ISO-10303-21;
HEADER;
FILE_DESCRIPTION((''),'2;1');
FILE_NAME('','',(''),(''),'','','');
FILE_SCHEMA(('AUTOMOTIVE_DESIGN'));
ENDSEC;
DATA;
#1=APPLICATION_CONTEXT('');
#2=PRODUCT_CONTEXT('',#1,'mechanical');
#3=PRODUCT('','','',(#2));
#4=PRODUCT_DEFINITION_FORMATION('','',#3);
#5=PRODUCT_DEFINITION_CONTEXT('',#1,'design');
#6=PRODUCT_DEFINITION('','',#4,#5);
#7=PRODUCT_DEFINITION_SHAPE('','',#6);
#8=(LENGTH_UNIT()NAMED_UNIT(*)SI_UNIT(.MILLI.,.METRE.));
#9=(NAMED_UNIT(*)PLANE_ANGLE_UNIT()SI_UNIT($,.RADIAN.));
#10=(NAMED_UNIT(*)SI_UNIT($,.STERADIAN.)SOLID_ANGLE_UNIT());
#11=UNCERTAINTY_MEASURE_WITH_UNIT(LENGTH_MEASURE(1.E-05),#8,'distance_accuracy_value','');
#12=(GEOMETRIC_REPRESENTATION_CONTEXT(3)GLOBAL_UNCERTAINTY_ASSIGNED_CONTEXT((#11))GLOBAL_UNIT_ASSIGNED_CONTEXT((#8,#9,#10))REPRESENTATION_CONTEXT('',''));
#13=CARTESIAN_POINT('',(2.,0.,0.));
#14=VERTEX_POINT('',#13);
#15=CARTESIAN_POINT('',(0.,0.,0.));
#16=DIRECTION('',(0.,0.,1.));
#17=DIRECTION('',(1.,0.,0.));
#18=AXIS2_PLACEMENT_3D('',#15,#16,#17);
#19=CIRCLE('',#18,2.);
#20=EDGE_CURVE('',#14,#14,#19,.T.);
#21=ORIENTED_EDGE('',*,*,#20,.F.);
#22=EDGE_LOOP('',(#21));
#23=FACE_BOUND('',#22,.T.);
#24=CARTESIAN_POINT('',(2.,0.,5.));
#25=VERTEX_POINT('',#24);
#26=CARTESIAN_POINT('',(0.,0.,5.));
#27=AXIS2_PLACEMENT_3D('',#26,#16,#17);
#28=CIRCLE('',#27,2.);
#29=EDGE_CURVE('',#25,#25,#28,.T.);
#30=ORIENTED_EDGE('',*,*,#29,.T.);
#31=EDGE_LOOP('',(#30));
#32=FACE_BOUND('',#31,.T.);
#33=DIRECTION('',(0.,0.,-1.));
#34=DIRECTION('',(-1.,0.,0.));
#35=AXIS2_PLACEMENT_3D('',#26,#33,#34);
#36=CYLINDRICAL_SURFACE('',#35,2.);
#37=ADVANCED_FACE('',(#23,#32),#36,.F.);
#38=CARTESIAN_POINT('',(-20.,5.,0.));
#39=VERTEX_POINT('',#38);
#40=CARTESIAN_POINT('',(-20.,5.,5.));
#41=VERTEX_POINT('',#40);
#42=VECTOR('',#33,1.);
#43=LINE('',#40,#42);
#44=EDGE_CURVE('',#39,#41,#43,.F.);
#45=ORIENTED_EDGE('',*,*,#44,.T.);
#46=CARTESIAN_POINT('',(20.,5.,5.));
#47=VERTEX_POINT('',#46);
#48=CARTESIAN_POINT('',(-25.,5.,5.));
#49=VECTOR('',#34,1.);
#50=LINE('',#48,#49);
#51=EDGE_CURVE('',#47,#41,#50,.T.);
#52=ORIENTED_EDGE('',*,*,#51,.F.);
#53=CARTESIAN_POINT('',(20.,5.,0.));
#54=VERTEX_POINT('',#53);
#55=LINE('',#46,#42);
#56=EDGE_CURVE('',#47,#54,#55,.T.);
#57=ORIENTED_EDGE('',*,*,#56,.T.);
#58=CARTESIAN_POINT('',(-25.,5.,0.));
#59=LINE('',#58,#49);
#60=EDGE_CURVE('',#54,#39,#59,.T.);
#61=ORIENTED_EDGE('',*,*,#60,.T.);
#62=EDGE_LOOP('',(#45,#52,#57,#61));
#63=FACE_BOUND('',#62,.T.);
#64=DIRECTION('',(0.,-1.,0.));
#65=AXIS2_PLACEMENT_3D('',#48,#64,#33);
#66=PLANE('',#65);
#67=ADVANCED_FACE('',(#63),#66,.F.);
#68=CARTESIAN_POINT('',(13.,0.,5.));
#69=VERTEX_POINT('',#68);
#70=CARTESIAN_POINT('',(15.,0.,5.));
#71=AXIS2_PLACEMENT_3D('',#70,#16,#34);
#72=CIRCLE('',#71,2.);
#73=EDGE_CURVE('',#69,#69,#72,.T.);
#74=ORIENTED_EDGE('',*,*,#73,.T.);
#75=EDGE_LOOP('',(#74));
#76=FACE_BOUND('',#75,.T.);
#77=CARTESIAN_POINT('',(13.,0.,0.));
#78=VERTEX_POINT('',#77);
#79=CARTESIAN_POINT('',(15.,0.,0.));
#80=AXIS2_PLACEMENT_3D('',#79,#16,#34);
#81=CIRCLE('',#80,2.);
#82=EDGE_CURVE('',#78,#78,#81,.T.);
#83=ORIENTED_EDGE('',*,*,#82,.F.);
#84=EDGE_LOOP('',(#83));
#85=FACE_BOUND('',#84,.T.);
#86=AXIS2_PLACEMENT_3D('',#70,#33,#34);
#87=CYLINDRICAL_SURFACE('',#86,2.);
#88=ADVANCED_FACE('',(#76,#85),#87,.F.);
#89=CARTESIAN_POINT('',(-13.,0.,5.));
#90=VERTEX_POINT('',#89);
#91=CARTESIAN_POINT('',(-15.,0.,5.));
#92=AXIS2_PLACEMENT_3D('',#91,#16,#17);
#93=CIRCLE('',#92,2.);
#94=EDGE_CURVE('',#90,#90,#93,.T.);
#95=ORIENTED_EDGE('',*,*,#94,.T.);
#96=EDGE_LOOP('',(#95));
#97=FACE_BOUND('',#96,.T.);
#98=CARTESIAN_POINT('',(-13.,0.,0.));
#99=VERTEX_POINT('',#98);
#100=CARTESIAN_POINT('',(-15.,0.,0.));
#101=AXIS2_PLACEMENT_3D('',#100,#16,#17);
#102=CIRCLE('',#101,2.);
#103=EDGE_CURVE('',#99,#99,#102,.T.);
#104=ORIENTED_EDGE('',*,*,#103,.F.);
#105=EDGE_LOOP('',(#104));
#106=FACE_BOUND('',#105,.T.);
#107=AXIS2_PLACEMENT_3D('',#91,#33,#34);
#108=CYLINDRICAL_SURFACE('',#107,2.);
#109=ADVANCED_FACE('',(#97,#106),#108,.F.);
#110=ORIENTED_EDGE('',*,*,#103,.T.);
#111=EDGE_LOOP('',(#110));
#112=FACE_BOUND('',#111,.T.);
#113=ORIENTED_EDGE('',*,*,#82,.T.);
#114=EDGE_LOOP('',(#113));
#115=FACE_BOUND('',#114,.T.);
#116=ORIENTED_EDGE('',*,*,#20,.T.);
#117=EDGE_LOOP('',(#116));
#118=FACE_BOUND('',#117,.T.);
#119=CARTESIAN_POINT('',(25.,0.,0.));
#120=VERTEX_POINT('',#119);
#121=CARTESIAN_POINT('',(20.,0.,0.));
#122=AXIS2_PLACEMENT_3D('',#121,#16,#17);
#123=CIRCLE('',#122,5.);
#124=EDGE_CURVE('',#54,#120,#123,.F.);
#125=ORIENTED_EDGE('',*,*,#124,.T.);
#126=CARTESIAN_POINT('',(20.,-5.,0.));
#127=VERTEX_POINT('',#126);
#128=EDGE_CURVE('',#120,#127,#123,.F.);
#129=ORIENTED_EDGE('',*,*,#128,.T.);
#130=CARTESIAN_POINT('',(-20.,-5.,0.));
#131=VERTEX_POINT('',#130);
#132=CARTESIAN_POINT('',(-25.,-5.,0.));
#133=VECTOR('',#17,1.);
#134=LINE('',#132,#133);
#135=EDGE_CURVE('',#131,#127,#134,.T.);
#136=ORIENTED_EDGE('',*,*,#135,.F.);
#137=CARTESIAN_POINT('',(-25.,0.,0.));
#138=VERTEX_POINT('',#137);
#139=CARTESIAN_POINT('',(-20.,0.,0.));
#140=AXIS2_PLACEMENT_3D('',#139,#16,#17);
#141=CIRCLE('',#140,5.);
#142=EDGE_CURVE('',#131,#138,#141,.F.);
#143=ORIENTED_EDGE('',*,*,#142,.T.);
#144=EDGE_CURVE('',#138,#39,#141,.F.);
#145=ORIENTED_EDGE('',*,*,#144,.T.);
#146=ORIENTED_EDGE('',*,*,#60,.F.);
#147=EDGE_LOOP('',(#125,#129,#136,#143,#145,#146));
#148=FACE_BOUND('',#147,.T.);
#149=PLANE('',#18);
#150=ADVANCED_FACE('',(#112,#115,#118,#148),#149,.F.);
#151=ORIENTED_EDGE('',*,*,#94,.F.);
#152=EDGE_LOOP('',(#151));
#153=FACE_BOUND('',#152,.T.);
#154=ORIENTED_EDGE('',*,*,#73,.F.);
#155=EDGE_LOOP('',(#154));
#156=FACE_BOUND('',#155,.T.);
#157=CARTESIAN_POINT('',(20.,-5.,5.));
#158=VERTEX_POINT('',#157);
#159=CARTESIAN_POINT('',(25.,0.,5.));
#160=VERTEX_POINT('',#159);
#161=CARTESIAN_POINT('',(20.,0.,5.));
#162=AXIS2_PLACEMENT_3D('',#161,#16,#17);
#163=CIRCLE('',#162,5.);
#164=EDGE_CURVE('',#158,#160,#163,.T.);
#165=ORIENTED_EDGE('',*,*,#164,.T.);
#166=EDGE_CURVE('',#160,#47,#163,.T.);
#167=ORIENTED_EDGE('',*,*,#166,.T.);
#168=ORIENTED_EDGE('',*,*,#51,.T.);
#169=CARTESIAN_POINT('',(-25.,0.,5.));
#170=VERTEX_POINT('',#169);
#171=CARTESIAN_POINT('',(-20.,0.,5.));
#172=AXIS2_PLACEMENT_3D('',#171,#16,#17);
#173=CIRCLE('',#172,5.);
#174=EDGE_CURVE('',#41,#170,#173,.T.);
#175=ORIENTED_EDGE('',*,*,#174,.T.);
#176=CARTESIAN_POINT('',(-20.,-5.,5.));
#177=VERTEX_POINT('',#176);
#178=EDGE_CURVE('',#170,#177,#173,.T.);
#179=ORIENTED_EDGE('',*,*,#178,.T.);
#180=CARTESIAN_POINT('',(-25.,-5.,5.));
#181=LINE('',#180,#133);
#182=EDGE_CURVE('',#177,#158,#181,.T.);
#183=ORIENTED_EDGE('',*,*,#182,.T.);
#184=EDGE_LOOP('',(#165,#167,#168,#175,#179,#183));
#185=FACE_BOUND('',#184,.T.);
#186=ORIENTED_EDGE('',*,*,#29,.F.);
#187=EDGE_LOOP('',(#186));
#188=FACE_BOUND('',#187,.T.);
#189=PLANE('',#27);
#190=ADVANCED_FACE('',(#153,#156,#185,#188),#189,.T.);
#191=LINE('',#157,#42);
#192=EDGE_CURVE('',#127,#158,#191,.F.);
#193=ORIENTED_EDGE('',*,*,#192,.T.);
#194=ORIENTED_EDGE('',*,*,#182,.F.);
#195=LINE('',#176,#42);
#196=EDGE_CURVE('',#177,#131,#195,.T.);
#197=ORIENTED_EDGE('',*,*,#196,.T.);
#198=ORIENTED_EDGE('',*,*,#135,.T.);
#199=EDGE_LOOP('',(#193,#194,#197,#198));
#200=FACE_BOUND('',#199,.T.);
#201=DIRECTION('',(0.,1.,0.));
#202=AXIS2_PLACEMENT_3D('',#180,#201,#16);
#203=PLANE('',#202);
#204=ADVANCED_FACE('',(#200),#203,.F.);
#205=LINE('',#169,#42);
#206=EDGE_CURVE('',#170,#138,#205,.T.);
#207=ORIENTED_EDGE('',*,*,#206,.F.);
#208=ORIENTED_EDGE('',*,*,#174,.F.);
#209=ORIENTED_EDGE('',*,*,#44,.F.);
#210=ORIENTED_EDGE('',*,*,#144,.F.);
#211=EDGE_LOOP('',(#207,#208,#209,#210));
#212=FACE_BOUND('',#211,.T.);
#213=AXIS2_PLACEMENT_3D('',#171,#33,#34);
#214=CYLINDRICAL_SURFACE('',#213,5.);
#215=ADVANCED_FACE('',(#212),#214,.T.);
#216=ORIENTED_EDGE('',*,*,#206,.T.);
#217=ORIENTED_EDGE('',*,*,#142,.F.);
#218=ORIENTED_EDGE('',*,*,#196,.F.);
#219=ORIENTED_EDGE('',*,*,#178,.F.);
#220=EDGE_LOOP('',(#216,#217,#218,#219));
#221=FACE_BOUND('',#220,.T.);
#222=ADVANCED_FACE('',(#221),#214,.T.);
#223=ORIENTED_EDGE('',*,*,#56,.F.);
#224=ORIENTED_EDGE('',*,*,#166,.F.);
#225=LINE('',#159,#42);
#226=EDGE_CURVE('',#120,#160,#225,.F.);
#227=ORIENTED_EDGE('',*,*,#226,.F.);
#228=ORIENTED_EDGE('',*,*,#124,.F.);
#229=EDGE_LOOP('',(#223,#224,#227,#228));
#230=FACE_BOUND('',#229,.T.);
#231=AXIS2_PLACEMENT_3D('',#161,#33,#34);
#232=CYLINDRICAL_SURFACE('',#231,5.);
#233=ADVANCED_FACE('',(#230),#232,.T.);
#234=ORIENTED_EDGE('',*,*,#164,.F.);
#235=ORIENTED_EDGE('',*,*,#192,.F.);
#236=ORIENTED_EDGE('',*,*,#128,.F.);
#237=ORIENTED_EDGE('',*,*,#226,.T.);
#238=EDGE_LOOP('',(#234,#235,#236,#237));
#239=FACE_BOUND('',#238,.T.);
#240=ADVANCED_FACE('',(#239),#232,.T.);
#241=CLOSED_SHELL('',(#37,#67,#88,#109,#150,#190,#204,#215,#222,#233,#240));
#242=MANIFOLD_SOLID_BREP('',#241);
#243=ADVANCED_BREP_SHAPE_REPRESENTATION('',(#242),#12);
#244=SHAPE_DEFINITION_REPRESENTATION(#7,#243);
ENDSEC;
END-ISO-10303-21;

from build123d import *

# Parameters (mm, degrees)
SKETCH_1_W      = 50
SKETCH_1_H      = 10
SKETCH_1_R      = 2
EXTRUDE_1_DEPTH = 5
FILLET_1_R      = 5


with BuildPart() as part:
    # 草图1 → 凸台-拉伸1 (new body)
    with BuildSketch(Plane.XY):
        Rectangle(SKETCH_1_W, SKETCH_1_H)
        with Locations((-15, 0)):
            Circle(SKETCH_1_R, mode=Mode.SUBTRACT)
        with Locations(Location((15, 0, 0), (0, 0, 180))):
            Circle(SKETCH_1_R, mode=Mode.SUBTRACT)
        Circle(SKETCH_1_R, mode=Mode.SUBTRACT)
    extrude(amount=EXTRUDE_1_DEPTH)

    # 圆角1
    fillet_1_edges = [part.edges().sort_by_distance(p)[0] for p in [
        (25, -5, 2.5),
        (25, 5, 2.5),
        (-25, -5, 2.5),
        (-25, 5, 2.5),
    ]]
    fillet(fillet_1_edges, radius=FILLET_1_R - 0.0001)  # a hair under: the kernel refuses the full size


solid = part.part
